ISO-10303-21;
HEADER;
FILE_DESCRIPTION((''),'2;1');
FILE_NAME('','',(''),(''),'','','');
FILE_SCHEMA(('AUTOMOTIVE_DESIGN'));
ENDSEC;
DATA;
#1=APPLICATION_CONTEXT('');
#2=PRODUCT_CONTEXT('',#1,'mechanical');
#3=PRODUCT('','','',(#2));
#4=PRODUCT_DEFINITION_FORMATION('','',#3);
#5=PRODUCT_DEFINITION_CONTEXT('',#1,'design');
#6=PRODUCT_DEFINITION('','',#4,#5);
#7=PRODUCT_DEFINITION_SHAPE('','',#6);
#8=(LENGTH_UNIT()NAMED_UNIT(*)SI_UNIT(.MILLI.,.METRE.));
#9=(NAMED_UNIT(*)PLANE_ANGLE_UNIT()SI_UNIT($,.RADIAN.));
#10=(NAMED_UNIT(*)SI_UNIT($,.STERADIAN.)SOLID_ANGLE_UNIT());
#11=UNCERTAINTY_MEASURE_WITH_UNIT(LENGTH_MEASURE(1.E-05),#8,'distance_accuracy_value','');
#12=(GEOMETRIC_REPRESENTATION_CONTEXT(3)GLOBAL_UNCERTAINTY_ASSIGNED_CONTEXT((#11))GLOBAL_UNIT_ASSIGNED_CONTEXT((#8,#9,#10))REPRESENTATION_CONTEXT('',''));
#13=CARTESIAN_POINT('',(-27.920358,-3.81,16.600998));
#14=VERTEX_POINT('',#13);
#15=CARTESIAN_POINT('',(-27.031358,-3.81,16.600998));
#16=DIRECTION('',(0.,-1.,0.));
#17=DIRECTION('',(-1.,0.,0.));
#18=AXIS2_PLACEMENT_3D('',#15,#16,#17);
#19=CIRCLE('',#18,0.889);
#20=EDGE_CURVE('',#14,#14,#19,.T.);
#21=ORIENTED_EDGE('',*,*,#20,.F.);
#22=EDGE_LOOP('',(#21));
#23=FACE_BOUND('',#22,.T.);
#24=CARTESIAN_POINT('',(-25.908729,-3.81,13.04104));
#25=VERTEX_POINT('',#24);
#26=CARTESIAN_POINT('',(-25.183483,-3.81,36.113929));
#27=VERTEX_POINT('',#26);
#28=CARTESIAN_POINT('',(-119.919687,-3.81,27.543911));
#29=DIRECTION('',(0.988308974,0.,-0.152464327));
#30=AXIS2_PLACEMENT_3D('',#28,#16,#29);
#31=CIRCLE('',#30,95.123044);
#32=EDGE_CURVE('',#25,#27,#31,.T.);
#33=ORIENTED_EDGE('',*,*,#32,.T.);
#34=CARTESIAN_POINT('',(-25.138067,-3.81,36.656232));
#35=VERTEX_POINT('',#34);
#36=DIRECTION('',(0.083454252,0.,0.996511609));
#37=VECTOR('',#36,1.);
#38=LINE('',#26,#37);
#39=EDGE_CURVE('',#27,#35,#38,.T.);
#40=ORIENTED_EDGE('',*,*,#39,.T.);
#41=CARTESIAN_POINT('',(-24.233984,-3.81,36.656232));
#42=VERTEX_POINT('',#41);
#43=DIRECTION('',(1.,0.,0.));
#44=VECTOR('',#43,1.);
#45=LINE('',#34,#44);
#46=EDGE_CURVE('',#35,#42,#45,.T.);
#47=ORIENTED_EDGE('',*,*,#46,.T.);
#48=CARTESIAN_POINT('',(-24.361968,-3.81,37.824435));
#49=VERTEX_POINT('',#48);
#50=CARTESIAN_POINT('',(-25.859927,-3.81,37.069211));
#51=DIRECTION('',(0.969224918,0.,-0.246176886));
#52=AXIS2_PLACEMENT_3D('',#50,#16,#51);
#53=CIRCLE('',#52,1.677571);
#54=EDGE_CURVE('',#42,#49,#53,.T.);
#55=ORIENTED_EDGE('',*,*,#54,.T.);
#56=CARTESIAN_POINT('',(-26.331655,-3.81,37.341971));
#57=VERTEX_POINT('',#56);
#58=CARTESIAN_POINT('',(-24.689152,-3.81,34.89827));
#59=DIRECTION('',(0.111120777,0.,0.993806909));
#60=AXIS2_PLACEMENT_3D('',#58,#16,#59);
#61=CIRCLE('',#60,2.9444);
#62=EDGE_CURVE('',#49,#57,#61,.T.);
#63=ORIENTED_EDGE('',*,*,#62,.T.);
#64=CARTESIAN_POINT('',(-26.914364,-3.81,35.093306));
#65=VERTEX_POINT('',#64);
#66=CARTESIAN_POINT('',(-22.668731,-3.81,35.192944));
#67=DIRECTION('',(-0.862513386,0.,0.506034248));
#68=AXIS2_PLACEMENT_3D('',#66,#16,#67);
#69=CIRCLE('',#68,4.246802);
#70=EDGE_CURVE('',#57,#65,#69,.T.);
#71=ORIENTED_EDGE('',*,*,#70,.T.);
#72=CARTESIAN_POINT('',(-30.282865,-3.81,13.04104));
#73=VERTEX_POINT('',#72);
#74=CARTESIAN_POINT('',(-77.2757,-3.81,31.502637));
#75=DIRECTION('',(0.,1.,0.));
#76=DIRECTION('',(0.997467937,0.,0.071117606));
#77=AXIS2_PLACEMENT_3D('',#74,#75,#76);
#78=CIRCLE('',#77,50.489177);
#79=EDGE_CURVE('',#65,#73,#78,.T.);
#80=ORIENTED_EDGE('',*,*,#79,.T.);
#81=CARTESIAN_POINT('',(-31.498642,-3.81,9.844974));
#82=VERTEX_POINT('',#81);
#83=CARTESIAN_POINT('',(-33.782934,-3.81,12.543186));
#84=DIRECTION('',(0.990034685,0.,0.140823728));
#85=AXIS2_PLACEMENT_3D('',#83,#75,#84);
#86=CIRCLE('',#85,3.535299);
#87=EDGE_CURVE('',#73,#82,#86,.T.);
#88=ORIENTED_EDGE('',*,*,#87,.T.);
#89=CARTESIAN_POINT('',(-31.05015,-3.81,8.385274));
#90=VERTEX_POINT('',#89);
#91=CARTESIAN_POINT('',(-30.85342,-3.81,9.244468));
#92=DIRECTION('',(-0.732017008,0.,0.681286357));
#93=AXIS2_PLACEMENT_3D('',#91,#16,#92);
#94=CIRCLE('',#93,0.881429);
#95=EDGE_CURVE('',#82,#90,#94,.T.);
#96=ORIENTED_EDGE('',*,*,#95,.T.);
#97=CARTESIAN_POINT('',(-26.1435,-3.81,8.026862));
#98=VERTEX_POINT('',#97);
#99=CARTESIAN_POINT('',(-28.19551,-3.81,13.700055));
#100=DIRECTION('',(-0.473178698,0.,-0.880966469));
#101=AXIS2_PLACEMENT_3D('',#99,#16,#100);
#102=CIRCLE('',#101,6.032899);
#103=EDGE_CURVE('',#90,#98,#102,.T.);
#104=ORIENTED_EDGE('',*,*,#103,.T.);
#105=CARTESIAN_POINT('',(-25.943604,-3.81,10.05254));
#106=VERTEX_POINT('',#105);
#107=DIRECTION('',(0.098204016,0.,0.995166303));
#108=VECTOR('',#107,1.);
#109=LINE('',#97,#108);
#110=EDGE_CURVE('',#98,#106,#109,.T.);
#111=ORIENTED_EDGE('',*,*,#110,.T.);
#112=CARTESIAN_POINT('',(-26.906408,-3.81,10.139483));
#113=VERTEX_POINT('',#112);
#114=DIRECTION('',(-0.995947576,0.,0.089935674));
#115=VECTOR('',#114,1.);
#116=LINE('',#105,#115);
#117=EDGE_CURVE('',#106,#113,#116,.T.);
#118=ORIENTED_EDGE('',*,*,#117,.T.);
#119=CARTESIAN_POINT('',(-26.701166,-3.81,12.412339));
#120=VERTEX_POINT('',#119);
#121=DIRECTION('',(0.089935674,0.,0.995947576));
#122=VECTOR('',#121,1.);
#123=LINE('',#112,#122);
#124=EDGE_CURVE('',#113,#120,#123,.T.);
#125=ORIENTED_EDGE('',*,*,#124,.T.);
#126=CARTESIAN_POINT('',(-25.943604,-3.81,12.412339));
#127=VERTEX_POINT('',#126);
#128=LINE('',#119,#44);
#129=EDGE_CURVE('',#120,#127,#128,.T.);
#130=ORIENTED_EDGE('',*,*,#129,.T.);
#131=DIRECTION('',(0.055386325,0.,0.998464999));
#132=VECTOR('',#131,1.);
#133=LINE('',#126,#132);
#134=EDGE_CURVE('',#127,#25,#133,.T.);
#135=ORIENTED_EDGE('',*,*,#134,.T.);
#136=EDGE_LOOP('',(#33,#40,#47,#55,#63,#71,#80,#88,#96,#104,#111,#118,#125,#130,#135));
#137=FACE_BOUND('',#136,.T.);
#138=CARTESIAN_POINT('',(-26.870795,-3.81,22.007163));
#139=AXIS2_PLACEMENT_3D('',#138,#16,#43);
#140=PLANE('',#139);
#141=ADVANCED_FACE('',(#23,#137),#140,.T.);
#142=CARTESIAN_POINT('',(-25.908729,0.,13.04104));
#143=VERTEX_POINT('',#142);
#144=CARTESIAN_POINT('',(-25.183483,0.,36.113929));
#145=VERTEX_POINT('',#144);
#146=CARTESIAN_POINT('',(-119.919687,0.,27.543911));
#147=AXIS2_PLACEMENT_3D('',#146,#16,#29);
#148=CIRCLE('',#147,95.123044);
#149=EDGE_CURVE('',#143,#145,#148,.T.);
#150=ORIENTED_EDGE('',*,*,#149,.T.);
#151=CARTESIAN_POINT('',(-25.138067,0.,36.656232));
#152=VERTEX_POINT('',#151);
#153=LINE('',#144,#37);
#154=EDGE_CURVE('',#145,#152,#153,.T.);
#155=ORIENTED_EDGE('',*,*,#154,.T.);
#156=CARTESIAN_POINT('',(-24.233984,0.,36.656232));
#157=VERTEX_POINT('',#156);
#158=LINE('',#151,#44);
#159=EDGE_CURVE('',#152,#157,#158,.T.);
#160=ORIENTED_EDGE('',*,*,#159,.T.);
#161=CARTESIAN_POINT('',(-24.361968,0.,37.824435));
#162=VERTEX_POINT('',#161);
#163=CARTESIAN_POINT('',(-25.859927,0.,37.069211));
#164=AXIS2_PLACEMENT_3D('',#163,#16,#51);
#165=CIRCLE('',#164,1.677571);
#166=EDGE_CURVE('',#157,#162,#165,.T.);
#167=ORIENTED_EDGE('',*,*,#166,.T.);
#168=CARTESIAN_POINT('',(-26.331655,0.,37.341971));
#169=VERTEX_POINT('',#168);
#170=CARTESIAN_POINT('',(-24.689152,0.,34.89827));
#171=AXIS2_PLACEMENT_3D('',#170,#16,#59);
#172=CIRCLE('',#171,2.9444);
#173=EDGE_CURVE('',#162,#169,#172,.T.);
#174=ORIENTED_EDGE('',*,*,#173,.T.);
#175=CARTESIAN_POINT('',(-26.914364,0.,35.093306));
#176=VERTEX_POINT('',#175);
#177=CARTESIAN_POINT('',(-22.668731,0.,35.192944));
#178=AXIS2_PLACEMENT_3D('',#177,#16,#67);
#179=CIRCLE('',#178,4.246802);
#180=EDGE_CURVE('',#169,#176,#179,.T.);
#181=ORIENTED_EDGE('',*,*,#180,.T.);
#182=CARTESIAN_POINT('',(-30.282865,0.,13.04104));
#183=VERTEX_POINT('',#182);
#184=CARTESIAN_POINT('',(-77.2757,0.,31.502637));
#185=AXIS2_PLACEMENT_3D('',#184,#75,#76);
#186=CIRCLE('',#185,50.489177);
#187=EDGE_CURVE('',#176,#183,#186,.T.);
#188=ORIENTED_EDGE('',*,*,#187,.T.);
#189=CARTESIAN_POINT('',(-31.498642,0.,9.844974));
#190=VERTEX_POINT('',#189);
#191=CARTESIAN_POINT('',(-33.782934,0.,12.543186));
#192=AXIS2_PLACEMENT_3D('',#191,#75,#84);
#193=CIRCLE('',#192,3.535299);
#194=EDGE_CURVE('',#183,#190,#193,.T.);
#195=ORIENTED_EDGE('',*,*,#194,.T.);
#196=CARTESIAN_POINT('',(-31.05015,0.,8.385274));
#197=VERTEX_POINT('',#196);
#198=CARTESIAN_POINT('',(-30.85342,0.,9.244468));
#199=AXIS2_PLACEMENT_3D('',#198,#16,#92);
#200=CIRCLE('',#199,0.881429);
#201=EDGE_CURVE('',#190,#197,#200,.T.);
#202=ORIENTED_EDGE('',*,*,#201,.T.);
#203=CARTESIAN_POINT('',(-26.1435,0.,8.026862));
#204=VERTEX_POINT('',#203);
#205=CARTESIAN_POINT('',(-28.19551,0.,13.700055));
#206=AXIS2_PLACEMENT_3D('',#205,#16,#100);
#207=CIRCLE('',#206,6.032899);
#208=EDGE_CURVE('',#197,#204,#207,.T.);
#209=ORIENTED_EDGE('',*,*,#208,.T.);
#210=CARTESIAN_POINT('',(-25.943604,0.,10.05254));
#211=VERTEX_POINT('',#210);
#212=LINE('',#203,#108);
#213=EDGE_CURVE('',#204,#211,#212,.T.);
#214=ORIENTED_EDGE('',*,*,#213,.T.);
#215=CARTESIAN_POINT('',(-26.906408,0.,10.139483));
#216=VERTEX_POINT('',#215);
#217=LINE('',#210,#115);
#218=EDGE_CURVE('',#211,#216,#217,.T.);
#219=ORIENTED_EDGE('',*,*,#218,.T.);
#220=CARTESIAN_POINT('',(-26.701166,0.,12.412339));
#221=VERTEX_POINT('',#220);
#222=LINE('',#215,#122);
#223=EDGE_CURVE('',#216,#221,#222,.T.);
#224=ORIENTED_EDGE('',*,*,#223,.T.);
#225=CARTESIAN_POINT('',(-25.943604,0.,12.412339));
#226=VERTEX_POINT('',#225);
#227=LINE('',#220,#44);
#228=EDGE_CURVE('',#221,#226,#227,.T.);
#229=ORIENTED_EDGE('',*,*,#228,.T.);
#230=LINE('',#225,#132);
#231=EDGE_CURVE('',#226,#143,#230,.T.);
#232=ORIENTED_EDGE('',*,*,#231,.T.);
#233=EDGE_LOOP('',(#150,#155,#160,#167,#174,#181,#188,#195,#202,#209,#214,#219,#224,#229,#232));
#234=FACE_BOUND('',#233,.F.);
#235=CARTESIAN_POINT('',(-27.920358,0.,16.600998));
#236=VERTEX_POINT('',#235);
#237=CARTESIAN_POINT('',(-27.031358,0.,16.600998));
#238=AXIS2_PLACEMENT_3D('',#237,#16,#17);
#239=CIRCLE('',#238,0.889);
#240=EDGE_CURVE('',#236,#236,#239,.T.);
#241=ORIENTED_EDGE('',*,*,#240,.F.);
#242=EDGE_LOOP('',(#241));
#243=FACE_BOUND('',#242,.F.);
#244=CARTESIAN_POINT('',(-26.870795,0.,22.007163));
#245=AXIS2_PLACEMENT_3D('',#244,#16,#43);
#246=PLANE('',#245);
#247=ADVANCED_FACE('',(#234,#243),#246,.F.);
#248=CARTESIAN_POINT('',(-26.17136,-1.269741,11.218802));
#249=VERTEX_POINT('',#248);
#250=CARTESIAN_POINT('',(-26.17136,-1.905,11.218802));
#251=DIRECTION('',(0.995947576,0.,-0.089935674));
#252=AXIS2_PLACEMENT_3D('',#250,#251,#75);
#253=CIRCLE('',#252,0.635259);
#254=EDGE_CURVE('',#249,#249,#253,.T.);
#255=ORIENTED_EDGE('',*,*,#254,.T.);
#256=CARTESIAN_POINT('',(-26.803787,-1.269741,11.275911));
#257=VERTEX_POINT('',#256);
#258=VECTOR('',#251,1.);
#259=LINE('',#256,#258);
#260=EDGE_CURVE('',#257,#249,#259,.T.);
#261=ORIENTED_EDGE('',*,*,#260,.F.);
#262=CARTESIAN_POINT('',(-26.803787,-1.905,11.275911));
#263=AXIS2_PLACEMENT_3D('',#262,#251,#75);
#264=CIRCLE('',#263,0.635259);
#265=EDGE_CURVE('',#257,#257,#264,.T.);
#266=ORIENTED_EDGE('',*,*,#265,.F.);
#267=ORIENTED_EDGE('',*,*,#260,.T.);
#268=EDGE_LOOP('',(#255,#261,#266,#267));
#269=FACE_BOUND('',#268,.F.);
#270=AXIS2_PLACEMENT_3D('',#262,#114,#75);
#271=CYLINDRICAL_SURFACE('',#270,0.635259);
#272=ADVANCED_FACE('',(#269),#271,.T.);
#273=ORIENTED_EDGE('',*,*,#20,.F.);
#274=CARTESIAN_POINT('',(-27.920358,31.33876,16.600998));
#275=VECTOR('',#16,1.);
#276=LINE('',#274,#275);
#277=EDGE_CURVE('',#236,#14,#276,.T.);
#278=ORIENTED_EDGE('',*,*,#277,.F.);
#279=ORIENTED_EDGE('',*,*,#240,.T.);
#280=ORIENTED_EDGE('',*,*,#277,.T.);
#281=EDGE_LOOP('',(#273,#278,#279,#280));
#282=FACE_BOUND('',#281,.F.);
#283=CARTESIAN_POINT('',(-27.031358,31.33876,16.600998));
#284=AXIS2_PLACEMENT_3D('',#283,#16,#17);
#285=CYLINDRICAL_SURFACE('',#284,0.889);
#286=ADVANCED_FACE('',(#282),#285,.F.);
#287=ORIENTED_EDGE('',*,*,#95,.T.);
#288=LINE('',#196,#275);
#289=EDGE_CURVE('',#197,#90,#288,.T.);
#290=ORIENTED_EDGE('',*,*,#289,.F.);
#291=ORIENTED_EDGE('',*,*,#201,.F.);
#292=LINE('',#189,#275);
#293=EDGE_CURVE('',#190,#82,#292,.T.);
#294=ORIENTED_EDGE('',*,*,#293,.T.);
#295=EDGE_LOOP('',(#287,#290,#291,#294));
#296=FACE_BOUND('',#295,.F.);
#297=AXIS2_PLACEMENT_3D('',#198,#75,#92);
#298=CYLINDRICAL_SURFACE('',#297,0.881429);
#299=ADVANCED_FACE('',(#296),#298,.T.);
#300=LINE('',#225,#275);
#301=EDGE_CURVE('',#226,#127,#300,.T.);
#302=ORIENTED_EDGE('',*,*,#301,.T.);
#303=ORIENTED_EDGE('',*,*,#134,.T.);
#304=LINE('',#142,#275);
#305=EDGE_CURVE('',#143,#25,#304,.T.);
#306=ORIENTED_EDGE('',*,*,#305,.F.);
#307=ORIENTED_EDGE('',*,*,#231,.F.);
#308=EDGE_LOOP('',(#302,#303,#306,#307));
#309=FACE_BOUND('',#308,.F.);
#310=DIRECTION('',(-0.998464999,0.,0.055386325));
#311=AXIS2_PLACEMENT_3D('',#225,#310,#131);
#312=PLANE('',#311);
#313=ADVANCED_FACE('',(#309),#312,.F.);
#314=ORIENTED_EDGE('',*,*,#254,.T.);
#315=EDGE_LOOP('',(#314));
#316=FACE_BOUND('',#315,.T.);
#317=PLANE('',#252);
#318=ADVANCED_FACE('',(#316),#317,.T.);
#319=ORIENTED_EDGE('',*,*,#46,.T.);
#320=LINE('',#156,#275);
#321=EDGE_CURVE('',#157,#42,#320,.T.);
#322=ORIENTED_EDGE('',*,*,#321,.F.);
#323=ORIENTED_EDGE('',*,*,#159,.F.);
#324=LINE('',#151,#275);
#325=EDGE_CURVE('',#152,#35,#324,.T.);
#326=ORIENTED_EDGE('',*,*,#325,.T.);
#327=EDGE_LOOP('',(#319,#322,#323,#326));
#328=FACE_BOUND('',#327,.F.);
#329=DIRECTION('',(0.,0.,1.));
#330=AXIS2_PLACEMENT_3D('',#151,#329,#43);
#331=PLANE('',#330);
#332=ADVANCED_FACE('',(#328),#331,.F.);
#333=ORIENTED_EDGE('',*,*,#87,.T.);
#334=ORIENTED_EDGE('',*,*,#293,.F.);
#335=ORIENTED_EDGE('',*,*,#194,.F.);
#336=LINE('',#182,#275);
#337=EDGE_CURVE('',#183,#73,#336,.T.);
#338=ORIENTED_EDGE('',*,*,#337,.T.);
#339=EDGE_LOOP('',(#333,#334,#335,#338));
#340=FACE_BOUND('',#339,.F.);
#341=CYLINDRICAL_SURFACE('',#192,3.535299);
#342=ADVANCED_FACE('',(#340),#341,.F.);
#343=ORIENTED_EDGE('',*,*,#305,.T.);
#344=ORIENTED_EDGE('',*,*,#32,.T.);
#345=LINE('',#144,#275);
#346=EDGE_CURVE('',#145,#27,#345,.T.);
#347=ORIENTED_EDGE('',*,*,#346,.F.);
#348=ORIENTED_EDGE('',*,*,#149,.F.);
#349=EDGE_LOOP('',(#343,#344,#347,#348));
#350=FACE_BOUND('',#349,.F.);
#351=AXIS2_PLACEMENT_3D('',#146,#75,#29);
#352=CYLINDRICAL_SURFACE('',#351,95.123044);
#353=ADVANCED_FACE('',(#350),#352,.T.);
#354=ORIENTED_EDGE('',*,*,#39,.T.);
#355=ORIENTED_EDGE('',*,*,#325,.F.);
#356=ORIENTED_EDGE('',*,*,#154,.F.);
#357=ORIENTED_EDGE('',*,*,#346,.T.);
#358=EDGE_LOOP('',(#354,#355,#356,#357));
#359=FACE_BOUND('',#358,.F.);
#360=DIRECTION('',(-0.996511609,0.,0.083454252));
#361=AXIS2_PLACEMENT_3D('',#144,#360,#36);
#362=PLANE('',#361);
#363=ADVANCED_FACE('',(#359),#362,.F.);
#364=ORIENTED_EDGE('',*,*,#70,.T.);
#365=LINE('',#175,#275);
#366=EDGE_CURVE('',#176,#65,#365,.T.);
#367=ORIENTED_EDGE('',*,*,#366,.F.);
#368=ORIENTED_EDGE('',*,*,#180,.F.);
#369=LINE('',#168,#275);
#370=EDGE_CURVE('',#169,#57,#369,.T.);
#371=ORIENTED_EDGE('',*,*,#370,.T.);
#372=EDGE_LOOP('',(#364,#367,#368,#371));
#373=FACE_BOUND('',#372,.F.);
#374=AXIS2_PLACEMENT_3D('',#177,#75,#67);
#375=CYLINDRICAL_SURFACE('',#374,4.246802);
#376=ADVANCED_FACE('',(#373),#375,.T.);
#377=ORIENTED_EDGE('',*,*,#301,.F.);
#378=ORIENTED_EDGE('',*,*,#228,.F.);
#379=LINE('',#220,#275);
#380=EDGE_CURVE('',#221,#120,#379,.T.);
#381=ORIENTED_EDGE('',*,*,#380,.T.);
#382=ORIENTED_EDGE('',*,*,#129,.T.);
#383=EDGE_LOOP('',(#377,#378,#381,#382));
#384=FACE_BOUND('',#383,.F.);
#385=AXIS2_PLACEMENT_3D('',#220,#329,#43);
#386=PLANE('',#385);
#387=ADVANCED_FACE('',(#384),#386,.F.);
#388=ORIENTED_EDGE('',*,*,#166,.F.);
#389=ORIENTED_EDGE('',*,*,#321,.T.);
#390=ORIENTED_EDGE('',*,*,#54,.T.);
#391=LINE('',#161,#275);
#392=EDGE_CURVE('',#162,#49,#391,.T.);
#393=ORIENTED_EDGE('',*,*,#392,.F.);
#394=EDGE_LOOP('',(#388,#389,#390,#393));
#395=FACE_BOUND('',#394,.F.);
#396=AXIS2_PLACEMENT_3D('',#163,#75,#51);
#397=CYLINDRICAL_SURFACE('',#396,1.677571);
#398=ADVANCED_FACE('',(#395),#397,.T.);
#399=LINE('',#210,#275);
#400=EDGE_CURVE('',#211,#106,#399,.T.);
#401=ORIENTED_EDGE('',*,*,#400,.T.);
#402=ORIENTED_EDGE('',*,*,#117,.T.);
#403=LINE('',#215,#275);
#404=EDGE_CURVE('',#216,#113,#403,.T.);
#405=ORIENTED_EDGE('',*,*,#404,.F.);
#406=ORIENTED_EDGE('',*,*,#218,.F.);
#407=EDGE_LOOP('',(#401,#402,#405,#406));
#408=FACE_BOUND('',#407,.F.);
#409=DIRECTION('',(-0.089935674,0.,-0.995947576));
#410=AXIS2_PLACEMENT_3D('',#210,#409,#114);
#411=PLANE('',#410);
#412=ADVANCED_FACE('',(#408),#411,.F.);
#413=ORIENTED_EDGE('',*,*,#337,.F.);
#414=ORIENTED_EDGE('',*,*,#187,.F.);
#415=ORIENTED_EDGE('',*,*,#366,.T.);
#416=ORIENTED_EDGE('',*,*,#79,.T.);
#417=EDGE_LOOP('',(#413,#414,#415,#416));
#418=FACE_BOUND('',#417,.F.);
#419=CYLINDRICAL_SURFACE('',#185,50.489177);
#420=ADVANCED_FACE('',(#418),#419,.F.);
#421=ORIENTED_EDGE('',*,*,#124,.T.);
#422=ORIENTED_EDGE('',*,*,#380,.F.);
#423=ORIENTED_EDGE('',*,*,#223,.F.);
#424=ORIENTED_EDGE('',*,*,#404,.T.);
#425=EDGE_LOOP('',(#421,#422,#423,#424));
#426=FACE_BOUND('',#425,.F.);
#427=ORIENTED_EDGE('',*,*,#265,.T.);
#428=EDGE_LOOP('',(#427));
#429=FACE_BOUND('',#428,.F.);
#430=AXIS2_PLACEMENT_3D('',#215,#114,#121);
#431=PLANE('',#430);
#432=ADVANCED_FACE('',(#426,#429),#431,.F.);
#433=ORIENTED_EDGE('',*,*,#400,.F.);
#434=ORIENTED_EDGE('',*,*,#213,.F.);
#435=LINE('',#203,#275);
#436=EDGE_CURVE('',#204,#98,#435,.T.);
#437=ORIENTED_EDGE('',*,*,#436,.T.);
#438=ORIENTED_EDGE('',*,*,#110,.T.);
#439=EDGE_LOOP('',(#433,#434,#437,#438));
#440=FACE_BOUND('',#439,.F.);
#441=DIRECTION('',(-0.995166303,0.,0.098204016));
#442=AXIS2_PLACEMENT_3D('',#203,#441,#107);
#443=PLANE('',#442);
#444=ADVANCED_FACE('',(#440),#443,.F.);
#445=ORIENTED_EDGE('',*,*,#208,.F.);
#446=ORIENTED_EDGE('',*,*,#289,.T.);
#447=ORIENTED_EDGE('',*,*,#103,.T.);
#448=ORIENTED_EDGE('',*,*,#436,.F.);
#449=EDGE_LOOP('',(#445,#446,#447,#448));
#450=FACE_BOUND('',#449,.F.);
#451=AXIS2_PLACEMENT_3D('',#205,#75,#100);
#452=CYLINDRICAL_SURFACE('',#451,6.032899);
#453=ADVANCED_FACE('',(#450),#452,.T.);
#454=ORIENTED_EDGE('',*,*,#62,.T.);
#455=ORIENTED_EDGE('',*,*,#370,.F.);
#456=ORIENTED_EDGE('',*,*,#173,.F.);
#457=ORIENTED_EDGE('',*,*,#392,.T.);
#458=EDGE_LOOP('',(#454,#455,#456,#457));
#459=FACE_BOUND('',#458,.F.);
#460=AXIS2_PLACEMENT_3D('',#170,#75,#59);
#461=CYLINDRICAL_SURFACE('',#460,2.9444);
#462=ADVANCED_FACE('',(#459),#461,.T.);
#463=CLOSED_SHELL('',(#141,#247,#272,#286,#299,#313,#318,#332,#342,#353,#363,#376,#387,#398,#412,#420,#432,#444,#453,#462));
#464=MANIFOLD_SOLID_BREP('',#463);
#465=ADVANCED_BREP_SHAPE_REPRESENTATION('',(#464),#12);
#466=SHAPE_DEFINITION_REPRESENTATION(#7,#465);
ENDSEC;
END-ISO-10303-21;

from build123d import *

# Parameters (mm, degrees)
F1_DEPTH = 3.81
F4_D     = 1.778
F5_R     = 0.6352589674
F6_DEPTH = 0.635


# Not quite as in the source:
# - a feature of the source that left no trace in its solid (it failed there, or was rolled back) is left out
# - a feature names something its author has since deleted; it is built from what else it names


with BuildPart() as f1:
    # F0 (on Front) → F1 (new body)
    with BuildSketch(Plane.XZ):
        with BuildLine():
            ThreePointArc((-31.4986416626, 9.8449740097), (-31.6959768892, 8.9855931424), (-31.0501495083, 8.3852735102))
            ThreePointArc((-31.0501495083, 8.3852735102), (-28.6350189428, 7.6831870892), (-26.1434996057, 8.026861912))
            Line((-26.1434996057, 8.026861912), (-25.9436036256, 10.0525402048))
            Line((-25.9436036256, 10.0525402048), (-26.9064083695, 10.1394830272))
            Line((-26.9064083695, 10.1394830272), (-26.7011658463, 12.4123385609))
            Line((-26.7011658463, 12.4123385609), (-25.9436036256, 12.4123385609))
            Line((-25.9436036256, 12.4123385609), (-25.9087286158, 13.0410402551))
            ThreePointArc((-25.9087286158, 13.0410402551), (-24.8435996749, 24.5554030542), (-25.1834829825, 36.1139293298))
            Line((-25.1834829825, 36.1139293298), (-25.1380671304, 36.6562315202))
            Line((-25.1380671304, 36.6562315202), (-24.2339836005, 36.6562315202))
            ThreePointArc((-24.2339836005, 36.6562315202), (-24.1923341682, 37.2519069884), (-24.3619682602, 37.8244349033))
            ThreePointArc((-24.3619682602, 37.8244349033), (-25.3896581056, 37.7581269753), (-26.3316547054, 37.3419712767))
            ThreePointArc((-26.3316547054, 37.3419712767), (-26.7797456815, 36.2582545781), (-26.9143641051, 35.0933059588))
            ThreePointArc((-26.9143641051, 35.0933059588), (-27.3654380994, 23.8788044049), (-30.282865234, 13.0410402552))
            ThreePointArc((-30.282865234, 13.0410402552), (-30.4786310467, 11.2862366956), (-31.4986416626, 9.8449740097))
        make_face()
    extrude(amount=F1_DEPTH)

    # F4 (through all)
    with Locations(Plane(origin=(0, 0, 0), x_dir=(1, 0, 0), z_dir=(0, 1, 0))):
        with Locations((-27.0313583314, -16.6009981185)):
            Hole(F4_D / 2)

    # F5 (on face) → F6 (join)
    with BuildSketch(Plane(origin=(-27.5969837191, 0, 2.4920521733), x_dir=(0, 1, 0), z_dir=(0.9959475762, 0, -0.0899356737))):
        with Locations((-1.905, 8.8195993749)):
            Circle(F5_R)
    extrude(amount=F6_DEPTH)


solid = f1.part
